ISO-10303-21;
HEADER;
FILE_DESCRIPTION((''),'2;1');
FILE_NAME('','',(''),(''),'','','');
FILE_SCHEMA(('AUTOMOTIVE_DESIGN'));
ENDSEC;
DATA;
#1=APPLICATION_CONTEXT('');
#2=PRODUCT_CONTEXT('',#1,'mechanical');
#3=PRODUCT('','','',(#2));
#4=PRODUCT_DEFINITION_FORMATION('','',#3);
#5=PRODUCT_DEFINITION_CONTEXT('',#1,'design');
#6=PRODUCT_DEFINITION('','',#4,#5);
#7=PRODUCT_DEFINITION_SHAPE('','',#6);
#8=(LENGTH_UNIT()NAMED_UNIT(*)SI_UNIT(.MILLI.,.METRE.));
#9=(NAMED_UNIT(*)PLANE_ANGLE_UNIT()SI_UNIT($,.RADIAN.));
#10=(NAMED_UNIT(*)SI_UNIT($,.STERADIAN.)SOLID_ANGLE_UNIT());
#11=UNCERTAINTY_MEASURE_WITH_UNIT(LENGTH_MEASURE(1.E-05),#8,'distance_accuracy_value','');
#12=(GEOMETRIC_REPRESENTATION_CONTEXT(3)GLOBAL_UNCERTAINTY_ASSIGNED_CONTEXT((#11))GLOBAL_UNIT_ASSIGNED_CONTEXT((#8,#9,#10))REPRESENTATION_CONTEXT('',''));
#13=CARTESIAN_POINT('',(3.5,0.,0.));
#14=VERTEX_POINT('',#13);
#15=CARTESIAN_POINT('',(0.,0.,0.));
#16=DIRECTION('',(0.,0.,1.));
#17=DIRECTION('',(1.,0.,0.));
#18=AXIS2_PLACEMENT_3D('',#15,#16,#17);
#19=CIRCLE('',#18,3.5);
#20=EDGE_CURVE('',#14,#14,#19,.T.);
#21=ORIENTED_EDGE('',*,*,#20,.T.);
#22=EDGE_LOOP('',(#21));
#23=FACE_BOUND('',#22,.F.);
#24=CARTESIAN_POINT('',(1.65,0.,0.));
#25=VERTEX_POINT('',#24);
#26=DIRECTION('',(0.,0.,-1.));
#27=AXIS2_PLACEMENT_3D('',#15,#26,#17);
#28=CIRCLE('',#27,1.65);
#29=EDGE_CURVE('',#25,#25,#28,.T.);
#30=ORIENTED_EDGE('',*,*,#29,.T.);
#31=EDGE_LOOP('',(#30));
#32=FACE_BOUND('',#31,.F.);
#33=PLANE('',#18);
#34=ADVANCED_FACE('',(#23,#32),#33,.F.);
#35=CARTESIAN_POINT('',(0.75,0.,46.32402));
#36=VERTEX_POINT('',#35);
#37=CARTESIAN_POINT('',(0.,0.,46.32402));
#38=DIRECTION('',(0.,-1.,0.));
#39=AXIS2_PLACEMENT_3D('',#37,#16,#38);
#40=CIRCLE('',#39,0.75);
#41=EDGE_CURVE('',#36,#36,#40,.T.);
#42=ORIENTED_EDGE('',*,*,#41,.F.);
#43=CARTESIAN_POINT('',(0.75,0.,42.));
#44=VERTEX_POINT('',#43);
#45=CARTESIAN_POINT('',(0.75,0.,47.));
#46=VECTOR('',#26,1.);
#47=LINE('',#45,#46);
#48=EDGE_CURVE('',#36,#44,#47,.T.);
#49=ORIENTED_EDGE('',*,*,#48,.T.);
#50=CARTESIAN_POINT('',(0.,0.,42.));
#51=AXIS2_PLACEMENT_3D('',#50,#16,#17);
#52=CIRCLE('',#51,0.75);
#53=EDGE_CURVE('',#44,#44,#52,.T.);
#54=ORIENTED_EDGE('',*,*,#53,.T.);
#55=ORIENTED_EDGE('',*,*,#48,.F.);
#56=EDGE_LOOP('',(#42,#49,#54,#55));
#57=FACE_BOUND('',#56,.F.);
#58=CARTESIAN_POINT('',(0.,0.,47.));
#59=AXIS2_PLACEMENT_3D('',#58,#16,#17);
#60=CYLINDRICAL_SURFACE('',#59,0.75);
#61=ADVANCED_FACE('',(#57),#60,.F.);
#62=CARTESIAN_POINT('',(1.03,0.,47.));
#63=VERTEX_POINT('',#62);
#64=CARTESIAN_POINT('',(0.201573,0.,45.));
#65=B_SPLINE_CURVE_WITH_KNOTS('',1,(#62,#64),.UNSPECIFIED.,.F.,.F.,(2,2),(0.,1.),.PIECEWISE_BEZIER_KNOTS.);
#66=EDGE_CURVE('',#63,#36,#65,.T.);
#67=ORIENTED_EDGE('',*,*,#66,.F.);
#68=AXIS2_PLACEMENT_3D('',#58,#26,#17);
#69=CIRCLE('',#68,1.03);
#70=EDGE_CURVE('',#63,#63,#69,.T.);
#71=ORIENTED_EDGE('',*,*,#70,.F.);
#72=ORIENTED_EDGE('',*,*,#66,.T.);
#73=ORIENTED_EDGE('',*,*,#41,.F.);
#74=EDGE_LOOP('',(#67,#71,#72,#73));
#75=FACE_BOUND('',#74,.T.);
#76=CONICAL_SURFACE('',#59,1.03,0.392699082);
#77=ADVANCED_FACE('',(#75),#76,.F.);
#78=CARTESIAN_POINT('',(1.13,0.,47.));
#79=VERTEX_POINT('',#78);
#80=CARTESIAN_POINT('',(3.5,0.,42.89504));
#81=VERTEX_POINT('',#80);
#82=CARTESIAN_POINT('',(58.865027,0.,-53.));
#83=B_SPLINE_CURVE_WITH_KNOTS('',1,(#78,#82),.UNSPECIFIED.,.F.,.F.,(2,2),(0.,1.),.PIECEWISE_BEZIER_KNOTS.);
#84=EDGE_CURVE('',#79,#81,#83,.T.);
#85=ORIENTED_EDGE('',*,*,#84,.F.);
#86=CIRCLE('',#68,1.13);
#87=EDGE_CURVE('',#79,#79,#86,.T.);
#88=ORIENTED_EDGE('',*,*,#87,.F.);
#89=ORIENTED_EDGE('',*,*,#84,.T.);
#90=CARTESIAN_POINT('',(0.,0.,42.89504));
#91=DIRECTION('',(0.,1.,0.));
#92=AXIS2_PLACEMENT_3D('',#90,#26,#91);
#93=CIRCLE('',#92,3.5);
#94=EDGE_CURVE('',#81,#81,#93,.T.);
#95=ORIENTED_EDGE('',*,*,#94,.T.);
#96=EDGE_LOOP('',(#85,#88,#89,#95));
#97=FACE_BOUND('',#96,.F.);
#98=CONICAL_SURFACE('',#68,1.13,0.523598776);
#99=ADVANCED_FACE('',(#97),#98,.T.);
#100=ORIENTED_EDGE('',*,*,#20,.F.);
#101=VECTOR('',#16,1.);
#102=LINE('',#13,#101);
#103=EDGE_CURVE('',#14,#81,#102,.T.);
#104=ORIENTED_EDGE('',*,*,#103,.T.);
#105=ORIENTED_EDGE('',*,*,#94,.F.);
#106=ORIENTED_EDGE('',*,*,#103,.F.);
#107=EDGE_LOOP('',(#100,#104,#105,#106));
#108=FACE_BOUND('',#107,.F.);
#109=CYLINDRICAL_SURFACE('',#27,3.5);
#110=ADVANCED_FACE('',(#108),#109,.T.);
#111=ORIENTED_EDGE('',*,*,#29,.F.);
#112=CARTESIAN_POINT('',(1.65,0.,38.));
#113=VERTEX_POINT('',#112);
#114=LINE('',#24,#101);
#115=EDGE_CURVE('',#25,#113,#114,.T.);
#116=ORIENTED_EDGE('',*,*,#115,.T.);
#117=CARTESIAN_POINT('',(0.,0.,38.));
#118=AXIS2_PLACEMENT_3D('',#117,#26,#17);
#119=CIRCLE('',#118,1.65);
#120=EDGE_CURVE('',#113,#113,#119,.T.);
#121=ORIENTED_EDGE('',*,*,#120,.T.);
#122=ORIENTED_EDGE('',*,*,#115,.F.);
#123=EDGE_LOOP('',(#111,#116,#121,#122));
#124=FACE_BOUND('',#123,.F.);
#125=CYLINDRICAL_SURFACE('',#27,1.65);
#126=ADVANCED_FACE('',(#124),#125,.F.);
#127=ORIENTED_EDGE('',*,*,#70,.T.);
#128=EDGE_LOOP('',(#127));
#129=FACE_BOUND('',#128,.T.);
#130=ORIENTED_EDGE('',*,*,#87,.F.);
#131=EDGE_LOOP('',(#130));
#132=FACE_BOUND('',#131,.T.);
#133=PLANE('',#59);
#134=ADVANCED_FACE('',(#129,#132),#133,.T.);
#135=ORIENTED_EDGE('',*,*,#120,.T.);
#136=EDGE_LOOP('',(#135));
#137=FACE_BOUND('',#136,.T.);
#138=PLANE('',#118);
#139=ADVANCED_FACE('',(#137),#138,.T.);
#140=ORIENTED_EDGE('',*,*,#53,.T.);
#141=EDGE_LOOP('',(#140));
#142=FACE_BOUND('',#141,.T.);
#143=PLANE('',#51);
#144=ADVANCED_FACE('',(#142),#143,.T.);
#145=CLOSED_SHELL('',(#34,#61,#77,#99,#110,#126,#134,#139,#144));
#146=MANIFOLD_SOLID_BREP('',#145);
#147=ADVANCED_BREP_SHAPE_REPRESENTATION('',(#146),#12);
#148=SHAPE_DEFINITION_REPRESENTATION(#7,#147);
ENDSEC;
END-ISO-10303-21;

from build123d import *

# Parameters (mm, degrees)
F0_R      = 3.5
F1_DEPTH  = 25
F2_DEPTH  = 47
F3_R      = 1.65
F4_DEPTH  = 38
F5_R      = 1.13
F6_DEPTH  = 100
F6_TAPER  = -30
F8_R      = 1.03
F9_DEPTH  = 2
F9_TAPER  = 22.5
F10_R     = 0.75
F11_DEPTH = 5


# Not quite as in the source:
# - a feature names something its author has since deleted; it is built from what else it names


with BuildPart() as f1:
    # F0 (on Top) → F1 (new body)
    with BuildSketch(Plane.XY):
        Circle(F0_R)
    extrude(amount=F1_DEPTH)


with BuildPart() as f2:
    # F0 (on Top) → F2 (new body)
    with BuildSketch(Plane.XY):
        Circle(F0_R)
    extrude(amount=F2_DEPTH)


with BuildPart() as f4_tool:
    # F3 (on face) → F4 (new body)
    with BuildSketch(Plane(origin=(0, 0, 0), x_dir=(1, 0, 0), z_dir=(0, 0, -1))):
        Circle(F3_R)
    extrude(amount=-F4_DEPTH)


with BuildPart() as f1_1:
    add(f1.part)

    # F4: cut by f4_tool
    add(f4_tool.part, mode=Mode.SUBTRACT)


with BuildPart() as f2_1:
    add(f2.part)

    # F4: cut by f4_tool
    add(f4_tool.part, mode=Mode.SUBTRACT)


with BuildPart() as f6_tool:
    # F5 (on face) → F6 (new body)
    with BuildSketch(Plane.XY.offset(47)):
        Circle(F5_R)
    extrude(amount=-F6_DEPTH, taper=F6_TAPER)


with BuildPart() as f1_2:
    add(f1_1.part)

    # F6: intersect by f6_tool
    add(f6_tool.part, mode=Mode.INTERSECT)


with BuildPart() as f2_2:
    add(f2_1.part)

    # F6: intersect by f6_tool
    add(f6_tool.part, mode=Mode.INTERSECT)

    # F8 (on face) → F9 (cut)
    with BuildSketch(Plane.XY.offset(47)):
        Circle(F8_R)
    extrude(amount=-F9_DEPTH, taper=F9_TAPER, mode=Mode.SUBTRACT)

    # F10 (on face) → F11 (cut)
    with BuildSketch(Plane.XY.offset(47)):
        Circle(F10_R)
    extrude(amount=-F11_DEPTH, mode=Mode.SUBTRACT)


solid = f2_2.part
